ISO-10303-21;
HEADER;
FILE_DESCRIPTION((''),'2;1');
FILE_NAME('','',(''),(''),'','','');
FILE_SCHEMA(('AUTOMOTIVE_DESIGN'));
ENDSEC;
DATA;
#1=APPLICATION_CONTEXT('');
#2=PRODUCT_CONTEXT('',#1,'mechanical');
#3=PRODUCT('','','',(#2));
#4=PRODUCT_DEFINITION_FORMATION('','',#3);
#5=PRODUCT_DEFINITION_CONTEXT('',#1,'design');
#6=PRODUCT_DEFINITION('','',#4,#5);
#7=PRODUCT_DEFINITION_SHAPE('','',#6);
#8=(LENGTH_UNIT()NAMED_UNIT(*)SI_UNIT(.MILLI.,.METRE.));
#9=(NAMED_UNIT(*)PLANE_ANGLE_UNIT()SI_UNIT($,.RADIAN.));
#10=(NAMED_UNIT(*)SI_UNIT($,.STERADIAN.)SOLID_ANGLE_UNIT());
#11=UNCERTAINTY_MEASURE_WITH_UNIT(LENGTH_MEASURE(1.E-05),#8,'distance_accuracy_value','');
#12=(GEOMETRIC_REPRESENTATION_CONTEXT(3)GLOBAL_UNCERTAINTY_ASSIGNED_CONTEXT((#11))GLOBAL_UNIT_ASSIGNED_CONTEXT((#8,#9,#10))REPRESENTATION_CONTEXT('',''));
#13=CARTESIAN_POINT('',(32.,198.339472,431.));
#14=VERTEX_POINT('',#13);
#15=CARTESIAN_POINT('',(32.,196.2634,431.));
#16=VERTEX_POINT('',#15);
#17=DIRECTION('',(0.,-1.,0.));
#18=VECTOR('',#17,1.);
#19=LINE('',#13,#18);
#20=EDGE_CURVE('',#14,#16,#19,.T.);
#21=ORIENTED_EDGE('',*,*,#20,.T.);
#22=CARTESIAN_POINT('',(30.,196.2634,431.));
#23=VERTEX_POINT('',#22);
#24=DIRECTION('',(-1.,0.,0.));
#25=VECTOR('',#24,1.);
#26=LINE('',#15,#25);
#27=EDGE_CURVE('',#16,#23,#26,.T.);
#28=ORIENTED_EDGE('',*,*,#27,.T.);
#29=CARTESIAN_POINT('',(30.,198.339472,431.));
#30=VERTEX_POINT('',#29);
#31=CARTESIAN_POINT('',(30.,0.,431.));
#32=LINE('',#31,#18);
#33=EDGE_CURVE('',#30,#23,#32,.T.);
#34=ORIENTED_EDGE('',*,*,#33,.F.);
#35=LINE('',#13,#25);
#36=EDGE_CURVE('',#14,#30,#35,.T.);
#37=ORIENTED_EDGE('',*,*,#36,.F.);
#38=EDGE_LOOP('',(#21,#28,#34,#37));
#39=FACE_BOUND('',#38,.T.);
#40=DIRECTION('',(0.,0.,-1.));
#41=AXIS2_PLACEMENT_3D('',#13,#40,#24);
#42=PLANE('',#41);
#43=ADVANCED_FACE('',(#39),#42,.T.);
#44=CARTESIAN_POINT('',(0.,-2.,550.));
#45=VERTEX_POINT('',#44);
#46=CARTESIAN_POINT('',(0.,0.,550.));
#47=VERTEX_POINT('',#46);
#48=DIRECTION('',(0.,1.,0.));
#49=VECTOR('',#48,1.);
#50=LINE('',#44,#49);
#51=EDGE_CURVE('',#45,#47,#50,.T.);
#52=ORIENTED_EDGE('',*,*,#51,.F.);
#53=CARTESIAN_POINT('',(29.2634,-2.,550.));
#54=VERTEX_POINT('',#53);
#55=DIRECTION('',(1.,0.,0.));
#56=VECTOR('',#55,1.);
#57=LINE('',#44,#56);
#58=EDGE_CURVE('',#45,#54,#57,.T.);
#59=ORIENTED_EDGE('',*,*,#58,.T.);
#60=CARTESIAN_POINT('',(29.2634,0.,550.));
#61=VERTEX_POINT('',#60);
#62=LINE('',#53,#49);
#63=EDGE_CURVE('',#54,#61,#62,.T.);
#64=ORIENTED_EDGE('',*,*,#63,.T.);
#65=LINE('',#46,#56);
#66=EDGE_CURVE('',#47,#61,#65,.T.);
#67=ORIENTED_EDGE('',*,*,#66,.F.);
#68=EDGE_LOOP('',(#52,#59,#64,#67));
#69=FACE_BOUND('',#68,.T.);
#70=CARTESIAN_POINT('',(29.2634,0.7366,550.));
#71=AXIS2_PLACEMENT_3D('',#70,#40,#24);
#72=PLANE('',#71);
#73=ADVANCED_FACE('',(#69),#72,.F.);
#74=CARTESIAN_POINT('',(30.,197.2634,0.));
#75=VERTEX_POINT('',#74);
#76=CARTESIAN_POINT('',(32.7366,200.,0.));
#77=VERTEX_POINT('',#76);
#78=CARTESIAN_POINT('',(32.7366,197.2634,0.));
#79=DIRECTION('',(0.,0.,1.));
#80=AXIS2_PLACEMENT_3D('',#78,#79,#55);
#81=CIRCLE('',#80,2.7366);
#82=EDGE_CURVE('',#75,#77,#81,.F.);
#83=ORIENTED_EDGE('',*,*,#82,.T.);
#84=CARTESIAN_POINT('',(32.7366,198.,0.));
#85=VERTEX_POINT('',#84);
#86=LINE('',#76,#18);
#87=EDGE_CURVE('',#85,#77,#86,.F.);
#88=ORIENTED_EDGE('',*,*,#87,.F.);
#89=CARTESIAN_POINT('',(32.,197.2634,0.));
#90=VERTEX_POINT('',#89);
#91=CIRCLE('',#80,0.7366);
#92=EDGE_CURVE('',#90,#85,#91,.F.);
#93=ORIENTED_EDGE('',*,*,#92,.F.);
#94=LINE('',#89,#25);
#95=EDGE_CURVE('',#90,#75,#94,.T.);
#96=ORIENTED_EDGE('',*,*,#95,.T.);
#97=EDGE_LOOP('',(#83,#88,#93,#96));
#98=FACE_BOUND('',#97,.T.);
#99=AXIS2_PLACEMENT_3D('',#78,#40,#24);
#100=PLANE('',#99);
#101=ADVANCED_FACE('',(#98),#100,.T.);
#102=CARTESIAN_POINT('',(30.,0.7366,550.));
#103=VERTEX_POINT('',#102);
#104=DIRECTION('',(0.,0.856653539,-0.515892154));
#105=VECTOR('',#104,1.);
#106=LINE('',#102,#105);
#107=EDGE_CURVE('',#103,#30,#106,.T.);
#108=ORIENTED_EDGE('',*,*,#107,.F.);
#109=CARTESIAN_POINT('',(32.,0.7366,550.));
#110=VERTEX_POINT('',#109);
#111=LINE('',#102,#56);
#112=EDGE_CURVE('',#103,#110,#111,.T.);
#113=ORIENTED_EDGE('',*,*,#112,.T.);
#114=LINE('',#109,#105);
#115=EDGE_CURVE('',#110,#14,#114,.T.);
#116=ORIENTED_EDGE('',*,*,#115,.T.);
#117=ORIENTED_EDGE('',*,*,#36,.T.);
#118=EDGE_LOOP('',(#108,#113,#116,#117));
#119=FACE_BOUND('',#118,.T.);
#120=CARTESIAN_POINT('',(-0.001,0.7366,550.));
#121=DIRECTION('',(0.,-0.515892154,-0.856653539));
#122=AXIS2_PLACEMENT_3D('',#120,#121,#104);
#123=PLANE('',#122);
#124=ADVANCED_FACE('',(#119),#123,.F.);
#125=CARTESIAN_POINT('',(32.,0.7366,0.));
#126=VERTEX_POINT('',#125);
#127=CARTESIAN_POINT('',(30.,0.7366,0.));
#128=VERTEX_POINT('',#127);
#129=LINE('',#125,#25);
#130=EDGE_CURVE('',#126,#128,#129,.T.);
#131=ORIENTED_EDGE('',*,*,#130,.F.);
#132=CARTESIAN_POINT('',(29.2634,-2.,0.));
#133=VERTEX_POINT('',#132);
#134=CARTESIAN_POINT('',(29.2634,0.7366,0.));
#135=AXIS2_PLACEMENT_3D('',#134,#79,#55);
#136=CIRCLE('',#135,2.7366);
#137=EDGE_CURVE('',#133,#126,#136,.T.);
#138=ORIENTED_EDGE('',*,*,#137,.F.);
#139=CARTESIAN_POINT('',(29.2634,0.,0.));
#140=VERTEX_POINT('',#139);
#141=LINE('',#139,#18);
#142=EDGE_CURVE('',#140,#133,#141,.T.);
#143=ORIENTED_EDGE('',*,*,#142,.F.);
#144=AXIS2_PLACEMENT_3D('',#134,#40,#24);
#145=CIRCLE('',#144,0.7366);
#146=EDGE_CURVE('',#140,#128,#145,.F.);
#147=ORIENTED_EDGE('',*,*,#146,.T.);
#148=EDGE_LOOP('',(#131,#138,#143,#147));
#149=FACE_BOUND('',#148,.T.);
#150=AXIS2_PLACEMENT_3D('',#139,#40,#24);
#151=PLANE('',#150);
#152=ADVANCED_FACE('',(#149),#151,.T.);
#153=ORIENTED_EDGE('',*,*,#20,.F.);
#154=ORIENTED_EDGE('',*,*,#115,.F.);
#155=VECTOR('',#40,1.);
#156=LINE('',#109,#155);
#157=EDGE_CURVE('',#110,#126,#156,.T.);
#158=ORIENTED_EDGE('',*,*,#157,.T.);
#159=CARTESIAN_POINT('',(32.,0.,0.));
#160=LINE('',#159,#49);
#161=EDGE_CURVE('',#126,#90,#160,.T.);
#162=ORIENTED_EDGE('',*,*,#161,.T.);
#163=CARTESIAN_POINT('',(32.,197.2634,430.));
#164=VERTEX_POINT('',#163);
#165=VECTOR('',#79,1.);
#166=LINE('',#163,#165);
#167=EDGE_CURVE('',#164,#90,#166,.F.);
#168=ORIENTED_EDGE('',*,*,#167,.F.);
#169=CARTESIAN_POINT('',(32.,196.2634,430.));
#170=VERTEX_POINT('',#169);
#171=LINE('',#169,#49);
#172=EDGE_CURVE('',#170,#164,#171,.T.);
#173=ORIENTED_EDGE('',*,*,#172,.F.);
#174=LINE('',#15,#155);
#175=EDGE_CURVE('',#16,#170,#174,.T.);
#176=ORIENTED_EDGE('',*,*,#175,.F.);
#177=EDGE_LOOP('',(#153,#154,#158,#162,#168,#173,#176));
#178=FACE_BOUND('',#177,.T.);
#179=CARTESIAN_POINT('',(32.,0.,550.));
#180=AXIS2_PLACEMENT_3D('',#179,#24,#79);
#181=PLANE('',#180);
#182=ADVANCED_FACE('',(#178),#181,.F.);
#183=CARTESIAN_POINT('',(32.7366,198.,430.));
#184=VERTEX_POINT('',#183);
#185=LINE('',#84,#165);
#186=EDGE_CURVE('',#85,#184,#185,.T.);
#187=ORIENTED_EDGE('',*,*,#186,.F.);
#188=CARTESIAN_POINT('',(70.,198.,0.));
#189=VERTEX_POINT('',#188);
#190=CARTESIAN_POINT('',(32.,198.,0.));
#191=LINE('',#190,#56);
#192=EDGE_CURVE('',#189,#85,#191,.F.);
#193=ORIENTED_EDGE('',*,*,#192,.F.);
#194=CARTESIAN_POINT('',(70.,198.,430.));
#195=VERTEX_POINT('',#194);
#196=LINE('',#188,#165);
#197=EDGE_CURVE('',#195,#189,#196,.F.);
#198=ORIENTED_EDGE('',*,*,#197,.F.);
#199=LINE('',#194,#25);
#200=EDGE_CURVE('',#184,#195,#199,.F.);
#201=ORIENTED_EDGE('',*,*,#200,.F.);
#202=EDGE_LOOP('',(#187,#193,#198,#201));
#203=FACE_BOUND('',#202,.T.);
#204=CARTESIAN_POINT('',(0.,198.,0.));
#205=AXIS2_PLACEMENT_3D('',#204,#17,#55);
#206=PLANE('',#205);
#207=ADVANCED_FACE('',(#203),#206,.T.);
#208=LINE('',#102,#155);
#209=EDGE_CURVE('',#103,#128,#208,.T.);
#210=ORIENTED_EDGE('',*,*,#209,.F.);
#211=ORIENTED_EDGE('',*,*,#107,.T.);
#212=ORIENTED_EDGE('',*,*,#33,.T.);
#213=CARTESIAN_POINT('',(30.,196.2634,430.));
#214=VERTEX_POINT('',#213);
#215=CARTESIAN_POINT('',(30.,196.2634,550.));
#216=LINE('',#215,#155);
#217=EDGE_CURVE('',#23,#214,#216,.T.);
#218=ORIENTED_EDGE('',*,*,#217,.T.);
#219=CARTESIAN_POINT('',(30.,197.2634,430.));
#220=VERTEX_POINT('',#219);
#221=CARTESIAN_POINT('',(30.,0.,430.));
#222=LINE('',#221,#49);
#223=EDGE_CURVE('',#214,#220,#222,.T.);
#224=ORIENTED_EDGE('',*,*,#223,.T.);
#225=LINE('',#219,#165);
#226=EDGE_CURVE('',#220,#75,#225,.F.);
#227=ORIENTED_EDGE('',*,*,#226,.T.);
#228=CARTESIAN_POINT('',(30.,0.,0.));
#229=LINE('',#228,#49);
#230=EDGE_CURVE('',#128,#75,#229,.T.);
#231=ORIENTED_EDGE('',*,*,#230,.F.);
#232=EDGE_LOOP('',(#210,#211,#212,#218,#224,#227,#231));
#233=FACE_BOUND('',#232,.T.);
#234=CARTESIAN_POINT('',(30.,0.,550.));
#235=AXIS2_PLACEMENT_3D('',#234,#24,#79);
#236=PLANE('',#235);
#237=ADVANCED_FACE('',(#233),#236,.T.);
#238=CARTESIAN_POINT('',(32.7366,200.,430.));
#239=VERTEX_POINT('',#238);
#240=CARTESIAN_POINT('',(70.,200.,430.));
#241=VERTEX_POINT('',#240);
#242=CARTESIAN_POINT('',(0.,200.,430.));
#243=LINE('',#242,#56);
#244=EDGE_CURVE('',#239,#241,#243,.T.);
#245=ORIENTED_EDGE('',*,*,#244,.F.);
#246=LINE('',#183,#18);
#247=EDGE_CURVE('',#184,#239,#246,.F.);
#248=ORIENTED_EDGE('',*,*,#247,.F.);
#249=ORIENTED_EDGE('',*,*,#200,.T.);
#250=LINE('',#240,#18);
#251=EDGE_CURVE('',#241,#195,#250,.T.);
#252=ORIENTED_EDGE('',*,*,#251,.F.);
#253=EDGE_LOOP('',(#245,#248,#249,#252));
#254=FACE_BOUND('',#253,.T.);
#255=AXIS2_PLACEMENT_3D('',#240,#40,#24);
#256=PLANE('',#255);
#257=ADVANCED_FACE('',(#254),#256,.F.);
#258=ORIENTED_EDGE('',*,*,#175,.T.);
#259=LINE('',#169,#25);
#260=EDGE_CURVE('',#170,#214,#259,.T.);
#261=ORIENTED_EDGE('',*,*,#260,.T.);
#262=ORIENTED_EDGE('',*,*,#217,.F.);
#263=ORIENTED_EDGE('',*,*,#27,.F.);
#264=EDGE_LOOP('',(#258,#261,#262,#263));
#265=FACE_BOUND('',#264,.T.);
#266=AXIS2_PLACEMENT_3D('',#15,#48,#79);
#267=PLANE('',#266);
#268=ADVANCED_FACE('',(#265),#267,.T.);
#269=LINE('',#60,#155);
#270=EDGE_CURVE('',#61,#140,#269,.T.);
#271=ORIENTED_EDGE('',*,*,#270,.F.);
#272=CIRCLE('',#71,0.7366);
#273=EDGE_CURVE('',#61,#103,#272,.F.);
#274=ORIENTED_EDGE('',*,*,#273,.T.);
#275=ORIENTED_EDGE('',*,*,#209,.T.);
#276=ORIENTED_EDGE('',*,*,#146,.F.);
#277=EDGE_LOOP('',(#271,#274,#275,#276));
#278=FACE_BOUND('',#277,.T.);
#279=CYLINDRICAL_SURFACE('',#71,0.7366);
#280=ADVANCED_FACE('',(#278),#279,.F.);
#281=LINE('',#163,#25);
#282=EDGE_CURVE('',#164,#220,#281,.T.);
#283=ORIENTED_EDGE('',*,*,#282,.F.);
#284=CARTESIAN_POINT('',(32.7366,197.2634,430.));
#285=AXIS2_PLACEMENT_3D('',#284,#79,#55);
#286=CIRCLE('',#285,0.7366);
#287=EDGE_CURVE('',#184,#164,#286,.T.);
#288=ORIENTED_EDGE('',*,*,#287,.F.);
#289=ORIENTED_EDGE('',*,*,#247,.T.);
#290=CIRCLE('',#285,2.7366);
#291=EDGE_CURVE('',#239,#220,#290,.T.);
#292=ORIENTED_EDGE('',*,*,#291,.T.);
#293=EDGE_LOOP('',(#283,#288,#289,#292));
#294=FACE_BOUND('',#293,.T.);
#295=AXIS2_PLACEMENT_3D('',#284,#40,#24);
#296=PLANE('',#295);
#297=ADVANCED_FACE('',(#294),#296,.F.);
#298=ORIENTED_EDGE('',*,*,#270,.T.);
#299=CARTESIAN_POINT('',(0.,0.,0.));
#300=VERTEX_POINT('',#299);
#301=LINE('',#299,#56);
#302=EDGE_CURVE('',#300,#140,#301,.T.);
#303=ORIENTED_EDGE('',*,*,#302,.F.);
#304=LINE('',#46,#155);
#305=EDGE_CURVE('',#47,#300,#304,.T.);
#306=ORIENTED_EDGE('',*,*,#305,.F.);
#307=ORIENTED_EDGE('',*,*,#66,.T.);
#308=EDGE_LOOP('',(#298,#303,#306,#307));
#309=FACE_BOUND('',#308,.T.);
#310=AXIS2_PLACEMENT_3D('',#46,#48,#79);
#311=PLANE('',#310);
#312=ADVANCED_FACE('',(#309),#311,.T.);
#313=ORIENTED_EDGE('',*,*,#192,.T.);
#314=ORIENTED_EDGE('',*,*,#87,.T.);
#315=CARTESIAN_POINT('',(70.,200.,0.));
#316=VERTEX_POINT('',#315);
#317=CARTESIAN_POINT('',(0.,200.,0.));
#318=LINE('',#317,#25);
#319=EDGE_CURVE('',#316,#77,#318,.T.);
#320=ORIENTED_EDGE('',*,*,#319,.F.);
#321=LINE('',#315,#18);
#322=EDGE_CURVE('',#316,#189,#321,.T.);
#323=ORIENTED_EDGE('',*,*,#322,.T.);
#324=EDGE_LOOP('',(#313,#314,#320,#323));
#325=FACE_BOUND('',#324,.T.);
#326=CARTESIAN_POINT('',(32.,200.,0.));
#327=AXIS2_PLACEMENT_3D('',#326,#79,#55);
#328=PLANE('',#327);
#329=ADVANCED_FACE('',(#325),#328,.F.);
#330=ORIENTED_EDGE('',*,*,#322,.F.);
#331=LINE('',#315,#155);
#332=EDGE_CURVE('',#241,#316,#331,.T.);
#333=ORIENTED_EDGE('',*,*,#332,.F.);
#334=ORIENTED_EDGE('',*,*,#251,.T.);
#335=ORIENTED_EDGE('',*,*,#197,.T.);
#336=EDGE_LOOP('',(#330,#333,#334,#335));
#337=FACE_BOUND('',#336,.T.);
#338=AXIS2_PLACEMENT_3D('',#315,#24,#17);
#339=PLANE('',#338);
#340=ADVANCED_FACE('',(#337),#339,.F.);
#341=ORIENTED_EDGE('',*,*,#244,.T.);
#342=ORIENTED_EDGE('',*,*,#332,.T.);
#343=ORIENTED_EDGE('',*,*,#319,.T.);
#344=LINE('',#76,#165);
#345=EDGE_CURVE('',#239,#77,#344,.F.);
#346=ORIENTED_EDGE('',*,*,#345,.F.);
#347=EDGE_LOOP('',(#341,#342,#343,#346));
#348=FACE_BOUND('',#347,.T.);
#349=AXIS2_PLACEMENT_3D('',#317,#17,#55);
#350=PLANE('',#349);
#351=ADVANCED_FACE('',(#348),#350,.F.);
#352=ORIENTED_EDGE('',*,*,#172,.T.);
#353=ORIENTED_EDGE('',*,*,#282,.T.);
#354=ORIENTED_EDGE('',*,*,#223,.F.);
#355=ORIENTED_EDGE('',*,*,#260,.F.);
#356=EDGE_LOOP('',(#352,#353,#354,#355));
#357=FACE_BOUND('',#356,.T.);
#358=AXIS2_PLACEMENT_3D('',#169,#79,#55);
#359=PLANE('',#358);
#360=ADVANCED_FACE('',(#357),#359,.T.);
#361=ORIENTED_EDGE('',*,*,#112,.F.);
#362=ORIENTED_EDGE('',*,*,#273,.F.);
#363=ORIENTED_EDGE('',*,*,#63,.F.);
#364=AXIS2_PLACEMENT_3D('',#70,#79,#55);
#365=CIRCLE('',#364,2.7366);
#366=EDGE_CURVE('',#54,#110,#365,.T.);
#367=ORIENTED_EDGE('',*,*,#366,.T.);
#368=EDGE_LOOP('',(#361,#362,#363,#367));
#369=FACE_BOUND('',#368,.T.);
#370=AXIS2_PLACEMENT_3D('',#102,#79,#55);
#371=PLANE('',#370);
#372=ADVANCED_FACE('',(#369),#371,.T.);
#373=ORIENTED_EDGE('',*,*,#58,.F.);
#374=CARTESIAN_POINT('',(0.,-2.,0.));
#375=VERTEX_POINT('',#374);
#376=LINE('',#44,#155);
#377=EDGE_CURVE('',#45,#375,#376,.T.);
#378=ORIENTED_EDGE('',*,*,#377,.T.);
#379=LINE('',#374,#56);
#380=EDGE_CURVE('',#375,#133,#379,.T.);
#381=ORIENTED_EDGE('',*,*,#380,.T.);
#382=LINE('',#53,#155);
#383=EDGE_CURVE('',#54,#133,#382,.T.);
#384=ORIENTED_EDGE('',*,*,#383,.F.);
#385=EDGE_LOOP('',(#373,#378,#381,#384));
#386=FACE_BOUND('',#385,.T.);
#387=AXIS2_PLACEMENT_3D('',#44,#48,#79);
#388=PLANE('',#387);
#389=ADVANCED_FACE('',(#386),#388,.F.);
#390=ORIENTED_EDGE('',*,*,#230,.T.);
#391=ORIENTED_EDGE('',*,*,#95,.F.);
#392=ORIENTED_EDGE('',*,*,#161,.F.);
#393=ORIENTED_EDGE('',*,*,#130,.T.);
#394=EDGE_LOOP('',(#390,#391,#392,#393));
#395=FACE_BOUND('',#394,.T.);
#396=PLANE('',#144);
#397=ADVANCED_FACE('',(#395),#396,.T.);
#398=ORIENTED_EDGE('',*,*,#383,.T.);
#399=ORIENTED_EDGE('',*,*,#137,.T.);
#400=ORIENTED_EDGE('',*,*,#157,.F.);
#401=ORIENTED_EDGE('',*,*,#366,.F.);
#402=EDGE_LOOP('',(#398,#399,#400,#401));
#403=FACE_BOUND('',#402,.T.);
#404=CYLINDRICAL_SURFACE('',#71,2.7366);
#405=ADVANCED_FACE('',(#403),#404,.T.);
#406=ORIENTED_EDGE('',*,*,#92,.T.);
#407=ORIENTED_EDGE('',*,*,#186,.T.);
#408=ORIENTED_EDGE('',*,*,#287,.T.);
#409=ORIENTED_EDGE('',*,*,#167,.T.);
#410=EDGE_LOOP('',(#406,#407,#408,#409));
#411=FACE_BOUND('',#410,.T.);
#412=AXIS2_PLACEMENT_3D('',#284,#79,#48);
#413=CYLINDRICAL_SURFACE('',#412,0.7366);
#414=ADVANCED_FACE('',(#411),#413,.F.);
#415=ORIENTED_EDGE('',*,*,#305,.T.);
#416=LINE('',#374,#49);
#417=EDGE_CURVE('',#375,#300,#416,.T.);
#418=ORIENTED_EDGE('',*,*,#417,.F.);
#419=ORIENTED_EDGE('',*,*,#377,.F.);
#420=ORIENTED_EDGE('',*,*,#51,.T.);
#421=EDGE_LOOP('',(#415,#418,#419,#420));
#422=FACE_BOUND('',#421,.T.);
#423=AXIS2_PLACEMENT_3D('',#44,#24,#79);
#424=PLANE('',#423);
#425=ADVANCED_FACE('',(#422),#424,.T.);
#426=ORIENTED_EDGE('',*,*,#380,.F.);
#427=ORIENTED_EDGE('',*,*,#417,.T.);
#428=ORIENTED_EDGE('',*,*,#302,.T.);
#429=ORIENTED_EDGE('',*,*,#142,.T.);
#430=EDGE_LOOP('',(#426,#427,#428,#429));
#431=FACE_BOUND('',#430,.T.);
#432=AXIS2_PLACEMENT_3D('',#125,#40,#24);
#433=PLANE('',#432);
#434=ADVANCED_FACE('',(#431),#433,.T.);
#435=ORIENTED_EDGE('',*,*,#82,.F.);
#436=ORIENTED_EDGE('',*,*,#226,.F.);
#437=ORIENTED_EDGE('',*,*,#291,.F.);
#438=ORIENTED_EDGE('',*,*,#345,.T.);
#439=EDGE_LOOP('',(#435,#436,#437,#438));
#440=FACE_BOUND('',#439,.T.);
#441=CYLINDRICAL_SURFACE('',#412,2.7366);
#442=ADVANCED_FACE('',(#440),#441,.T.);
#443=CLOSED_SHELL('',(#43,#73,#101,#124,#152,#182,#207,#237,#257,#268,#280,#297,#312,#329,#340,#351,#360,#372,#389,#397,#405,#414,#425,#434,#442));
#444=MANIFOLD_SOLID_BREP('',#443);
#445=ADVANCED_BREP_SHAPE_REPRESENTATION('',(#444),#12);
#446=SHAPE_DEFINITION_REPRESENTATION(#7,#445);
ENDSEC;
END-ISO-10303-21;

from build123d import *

# Parameters (mm, degrees)
BASE_FLANGE1_DEPTH            = 550
CUT_EXTRUDE1_REACH            = 588.109
EDGE_FLANGE1_STRIP_W          = 9.4732
EDGE_FLANGE1_STRIP_H          = 2
EDGE_FLANGE1_STRIP_CUT_DEPTH  = 430
EDGE_FLANGE1_RELIEF_W         = 10.4732
EDGE_FLANGE1_RELIEF_H         = 1
EDGE_FLANGE1_RELIEF_CUT_DEPTH = 2
EDGE_FLANGE1_DEPTH            = 430


# Sheet-metal steps are written as plain solids
with BuildPart() as part:
    # Sketch1 → Base-Flange1 (new body)
    with BuildSketch(Plane.XY):
        with BuildLine():
            Line((0, 0), (29.2634, 0))
            ThreePointArc((29.2634, 0), (29.784254855, 0.215745145), (30, 0.7366))
            Line((30, 0.7366), (30, 200))
            Line((30, 200), (32, 200))
            Line((32, 200), (32, 0.7366))
            ThreePointArc((32, 0.7366), (31.198468417, -1.198468417), (29.2634, -2))
            Line((29.2634, -2), (0, -2))
            Line((0, -2), (0, 0))
        make_face()
    extrude(amount=BASE_FLANGE1_DEPTH)

    # Sketch6 → Cut-Extrude1 (cut, up to next)
    with BuildSketch(Plane(origin=(32, 0, 0), x_dir=(0, 0, -1), z_dir=(1, 0, 0)), mode=Mode.PRIVATE) as cut_extrude1_sk1:
        Polygon((-550, 0.7366), (-430, 200), (-550, 200), align=None)
    cut_extrude1_tool1 = extrude(cut_extrude1_sk1.sketch, amount=-CUT_EXTRUDE1_REACH, mode=Mode.PRIVATE) & part.part
    add(cut_extrude1_tool1.solids().sort_by_distance((32, 133.578867, 510))[0], mode=Mode.SUBTRACT)

    # Edge-Flange1 strip (across the edge) → Edge-Flange1 strip cut (cut)
    with BuildSketch(Plane(origin=(32, 200, 0), x_dir=(0, -1, 0), z_dir=(0, 0, 1))):
        with Locations((-2, -1)):
            Rectangle(EDGE_FLANGE1_STRIP_W, EDGE_FLANGE1_STRIP_H)
    extrude(amount=EDGE_FLANGE1_STRIP_CUT_DEPTH, mode=Mode.SUBTRACT)

    # Edge-Flange1 relief (on the sheet) → Edge-Flange1 relief cut (cut)
    with BuildSketch(Plane(origin=(32, 197.2634, 0), x_dir=(0, -1, 0), z_dir=(1, 0, 0))):
        with Locations((-4.2366, -430.5)):
            Rectangle(EDGE_FLANGE1_RELIEF_W, EDGE_FLANGE1_RELIEF_H)
    extrude(amount=-EDGE_FLANGE1_RELIEF_CUT_DEPTH, mode=Mode.SUBTRACT)

    # Edge-Flange1 section (across the edge) → Edge-Flange1 (add)
    with BuildSketch(Plane(origin=(32, 200, 0), x_dir=(0, -1, 0), z_dir=(0, 0, 1))):
        with BuildLine():
            Line((0, 0.7366), (0, 38))
            Line((0, 38), (2, 38))
            Line((2, 38), (2, 0.7366))
            ThreePointArc((2, 0.7366), (2.215745145, 0.215745145), (2.7366, 0))
            Line((2.7366, 0), (2.7366, -2))
            ThreePointArc((2.7366, -2), (0.801531583, -1.198468417), (0, 0.7366))
        make_face()
    extrude(amount=EDGE_FLANGE1_DEPTH)


solid = part.part
